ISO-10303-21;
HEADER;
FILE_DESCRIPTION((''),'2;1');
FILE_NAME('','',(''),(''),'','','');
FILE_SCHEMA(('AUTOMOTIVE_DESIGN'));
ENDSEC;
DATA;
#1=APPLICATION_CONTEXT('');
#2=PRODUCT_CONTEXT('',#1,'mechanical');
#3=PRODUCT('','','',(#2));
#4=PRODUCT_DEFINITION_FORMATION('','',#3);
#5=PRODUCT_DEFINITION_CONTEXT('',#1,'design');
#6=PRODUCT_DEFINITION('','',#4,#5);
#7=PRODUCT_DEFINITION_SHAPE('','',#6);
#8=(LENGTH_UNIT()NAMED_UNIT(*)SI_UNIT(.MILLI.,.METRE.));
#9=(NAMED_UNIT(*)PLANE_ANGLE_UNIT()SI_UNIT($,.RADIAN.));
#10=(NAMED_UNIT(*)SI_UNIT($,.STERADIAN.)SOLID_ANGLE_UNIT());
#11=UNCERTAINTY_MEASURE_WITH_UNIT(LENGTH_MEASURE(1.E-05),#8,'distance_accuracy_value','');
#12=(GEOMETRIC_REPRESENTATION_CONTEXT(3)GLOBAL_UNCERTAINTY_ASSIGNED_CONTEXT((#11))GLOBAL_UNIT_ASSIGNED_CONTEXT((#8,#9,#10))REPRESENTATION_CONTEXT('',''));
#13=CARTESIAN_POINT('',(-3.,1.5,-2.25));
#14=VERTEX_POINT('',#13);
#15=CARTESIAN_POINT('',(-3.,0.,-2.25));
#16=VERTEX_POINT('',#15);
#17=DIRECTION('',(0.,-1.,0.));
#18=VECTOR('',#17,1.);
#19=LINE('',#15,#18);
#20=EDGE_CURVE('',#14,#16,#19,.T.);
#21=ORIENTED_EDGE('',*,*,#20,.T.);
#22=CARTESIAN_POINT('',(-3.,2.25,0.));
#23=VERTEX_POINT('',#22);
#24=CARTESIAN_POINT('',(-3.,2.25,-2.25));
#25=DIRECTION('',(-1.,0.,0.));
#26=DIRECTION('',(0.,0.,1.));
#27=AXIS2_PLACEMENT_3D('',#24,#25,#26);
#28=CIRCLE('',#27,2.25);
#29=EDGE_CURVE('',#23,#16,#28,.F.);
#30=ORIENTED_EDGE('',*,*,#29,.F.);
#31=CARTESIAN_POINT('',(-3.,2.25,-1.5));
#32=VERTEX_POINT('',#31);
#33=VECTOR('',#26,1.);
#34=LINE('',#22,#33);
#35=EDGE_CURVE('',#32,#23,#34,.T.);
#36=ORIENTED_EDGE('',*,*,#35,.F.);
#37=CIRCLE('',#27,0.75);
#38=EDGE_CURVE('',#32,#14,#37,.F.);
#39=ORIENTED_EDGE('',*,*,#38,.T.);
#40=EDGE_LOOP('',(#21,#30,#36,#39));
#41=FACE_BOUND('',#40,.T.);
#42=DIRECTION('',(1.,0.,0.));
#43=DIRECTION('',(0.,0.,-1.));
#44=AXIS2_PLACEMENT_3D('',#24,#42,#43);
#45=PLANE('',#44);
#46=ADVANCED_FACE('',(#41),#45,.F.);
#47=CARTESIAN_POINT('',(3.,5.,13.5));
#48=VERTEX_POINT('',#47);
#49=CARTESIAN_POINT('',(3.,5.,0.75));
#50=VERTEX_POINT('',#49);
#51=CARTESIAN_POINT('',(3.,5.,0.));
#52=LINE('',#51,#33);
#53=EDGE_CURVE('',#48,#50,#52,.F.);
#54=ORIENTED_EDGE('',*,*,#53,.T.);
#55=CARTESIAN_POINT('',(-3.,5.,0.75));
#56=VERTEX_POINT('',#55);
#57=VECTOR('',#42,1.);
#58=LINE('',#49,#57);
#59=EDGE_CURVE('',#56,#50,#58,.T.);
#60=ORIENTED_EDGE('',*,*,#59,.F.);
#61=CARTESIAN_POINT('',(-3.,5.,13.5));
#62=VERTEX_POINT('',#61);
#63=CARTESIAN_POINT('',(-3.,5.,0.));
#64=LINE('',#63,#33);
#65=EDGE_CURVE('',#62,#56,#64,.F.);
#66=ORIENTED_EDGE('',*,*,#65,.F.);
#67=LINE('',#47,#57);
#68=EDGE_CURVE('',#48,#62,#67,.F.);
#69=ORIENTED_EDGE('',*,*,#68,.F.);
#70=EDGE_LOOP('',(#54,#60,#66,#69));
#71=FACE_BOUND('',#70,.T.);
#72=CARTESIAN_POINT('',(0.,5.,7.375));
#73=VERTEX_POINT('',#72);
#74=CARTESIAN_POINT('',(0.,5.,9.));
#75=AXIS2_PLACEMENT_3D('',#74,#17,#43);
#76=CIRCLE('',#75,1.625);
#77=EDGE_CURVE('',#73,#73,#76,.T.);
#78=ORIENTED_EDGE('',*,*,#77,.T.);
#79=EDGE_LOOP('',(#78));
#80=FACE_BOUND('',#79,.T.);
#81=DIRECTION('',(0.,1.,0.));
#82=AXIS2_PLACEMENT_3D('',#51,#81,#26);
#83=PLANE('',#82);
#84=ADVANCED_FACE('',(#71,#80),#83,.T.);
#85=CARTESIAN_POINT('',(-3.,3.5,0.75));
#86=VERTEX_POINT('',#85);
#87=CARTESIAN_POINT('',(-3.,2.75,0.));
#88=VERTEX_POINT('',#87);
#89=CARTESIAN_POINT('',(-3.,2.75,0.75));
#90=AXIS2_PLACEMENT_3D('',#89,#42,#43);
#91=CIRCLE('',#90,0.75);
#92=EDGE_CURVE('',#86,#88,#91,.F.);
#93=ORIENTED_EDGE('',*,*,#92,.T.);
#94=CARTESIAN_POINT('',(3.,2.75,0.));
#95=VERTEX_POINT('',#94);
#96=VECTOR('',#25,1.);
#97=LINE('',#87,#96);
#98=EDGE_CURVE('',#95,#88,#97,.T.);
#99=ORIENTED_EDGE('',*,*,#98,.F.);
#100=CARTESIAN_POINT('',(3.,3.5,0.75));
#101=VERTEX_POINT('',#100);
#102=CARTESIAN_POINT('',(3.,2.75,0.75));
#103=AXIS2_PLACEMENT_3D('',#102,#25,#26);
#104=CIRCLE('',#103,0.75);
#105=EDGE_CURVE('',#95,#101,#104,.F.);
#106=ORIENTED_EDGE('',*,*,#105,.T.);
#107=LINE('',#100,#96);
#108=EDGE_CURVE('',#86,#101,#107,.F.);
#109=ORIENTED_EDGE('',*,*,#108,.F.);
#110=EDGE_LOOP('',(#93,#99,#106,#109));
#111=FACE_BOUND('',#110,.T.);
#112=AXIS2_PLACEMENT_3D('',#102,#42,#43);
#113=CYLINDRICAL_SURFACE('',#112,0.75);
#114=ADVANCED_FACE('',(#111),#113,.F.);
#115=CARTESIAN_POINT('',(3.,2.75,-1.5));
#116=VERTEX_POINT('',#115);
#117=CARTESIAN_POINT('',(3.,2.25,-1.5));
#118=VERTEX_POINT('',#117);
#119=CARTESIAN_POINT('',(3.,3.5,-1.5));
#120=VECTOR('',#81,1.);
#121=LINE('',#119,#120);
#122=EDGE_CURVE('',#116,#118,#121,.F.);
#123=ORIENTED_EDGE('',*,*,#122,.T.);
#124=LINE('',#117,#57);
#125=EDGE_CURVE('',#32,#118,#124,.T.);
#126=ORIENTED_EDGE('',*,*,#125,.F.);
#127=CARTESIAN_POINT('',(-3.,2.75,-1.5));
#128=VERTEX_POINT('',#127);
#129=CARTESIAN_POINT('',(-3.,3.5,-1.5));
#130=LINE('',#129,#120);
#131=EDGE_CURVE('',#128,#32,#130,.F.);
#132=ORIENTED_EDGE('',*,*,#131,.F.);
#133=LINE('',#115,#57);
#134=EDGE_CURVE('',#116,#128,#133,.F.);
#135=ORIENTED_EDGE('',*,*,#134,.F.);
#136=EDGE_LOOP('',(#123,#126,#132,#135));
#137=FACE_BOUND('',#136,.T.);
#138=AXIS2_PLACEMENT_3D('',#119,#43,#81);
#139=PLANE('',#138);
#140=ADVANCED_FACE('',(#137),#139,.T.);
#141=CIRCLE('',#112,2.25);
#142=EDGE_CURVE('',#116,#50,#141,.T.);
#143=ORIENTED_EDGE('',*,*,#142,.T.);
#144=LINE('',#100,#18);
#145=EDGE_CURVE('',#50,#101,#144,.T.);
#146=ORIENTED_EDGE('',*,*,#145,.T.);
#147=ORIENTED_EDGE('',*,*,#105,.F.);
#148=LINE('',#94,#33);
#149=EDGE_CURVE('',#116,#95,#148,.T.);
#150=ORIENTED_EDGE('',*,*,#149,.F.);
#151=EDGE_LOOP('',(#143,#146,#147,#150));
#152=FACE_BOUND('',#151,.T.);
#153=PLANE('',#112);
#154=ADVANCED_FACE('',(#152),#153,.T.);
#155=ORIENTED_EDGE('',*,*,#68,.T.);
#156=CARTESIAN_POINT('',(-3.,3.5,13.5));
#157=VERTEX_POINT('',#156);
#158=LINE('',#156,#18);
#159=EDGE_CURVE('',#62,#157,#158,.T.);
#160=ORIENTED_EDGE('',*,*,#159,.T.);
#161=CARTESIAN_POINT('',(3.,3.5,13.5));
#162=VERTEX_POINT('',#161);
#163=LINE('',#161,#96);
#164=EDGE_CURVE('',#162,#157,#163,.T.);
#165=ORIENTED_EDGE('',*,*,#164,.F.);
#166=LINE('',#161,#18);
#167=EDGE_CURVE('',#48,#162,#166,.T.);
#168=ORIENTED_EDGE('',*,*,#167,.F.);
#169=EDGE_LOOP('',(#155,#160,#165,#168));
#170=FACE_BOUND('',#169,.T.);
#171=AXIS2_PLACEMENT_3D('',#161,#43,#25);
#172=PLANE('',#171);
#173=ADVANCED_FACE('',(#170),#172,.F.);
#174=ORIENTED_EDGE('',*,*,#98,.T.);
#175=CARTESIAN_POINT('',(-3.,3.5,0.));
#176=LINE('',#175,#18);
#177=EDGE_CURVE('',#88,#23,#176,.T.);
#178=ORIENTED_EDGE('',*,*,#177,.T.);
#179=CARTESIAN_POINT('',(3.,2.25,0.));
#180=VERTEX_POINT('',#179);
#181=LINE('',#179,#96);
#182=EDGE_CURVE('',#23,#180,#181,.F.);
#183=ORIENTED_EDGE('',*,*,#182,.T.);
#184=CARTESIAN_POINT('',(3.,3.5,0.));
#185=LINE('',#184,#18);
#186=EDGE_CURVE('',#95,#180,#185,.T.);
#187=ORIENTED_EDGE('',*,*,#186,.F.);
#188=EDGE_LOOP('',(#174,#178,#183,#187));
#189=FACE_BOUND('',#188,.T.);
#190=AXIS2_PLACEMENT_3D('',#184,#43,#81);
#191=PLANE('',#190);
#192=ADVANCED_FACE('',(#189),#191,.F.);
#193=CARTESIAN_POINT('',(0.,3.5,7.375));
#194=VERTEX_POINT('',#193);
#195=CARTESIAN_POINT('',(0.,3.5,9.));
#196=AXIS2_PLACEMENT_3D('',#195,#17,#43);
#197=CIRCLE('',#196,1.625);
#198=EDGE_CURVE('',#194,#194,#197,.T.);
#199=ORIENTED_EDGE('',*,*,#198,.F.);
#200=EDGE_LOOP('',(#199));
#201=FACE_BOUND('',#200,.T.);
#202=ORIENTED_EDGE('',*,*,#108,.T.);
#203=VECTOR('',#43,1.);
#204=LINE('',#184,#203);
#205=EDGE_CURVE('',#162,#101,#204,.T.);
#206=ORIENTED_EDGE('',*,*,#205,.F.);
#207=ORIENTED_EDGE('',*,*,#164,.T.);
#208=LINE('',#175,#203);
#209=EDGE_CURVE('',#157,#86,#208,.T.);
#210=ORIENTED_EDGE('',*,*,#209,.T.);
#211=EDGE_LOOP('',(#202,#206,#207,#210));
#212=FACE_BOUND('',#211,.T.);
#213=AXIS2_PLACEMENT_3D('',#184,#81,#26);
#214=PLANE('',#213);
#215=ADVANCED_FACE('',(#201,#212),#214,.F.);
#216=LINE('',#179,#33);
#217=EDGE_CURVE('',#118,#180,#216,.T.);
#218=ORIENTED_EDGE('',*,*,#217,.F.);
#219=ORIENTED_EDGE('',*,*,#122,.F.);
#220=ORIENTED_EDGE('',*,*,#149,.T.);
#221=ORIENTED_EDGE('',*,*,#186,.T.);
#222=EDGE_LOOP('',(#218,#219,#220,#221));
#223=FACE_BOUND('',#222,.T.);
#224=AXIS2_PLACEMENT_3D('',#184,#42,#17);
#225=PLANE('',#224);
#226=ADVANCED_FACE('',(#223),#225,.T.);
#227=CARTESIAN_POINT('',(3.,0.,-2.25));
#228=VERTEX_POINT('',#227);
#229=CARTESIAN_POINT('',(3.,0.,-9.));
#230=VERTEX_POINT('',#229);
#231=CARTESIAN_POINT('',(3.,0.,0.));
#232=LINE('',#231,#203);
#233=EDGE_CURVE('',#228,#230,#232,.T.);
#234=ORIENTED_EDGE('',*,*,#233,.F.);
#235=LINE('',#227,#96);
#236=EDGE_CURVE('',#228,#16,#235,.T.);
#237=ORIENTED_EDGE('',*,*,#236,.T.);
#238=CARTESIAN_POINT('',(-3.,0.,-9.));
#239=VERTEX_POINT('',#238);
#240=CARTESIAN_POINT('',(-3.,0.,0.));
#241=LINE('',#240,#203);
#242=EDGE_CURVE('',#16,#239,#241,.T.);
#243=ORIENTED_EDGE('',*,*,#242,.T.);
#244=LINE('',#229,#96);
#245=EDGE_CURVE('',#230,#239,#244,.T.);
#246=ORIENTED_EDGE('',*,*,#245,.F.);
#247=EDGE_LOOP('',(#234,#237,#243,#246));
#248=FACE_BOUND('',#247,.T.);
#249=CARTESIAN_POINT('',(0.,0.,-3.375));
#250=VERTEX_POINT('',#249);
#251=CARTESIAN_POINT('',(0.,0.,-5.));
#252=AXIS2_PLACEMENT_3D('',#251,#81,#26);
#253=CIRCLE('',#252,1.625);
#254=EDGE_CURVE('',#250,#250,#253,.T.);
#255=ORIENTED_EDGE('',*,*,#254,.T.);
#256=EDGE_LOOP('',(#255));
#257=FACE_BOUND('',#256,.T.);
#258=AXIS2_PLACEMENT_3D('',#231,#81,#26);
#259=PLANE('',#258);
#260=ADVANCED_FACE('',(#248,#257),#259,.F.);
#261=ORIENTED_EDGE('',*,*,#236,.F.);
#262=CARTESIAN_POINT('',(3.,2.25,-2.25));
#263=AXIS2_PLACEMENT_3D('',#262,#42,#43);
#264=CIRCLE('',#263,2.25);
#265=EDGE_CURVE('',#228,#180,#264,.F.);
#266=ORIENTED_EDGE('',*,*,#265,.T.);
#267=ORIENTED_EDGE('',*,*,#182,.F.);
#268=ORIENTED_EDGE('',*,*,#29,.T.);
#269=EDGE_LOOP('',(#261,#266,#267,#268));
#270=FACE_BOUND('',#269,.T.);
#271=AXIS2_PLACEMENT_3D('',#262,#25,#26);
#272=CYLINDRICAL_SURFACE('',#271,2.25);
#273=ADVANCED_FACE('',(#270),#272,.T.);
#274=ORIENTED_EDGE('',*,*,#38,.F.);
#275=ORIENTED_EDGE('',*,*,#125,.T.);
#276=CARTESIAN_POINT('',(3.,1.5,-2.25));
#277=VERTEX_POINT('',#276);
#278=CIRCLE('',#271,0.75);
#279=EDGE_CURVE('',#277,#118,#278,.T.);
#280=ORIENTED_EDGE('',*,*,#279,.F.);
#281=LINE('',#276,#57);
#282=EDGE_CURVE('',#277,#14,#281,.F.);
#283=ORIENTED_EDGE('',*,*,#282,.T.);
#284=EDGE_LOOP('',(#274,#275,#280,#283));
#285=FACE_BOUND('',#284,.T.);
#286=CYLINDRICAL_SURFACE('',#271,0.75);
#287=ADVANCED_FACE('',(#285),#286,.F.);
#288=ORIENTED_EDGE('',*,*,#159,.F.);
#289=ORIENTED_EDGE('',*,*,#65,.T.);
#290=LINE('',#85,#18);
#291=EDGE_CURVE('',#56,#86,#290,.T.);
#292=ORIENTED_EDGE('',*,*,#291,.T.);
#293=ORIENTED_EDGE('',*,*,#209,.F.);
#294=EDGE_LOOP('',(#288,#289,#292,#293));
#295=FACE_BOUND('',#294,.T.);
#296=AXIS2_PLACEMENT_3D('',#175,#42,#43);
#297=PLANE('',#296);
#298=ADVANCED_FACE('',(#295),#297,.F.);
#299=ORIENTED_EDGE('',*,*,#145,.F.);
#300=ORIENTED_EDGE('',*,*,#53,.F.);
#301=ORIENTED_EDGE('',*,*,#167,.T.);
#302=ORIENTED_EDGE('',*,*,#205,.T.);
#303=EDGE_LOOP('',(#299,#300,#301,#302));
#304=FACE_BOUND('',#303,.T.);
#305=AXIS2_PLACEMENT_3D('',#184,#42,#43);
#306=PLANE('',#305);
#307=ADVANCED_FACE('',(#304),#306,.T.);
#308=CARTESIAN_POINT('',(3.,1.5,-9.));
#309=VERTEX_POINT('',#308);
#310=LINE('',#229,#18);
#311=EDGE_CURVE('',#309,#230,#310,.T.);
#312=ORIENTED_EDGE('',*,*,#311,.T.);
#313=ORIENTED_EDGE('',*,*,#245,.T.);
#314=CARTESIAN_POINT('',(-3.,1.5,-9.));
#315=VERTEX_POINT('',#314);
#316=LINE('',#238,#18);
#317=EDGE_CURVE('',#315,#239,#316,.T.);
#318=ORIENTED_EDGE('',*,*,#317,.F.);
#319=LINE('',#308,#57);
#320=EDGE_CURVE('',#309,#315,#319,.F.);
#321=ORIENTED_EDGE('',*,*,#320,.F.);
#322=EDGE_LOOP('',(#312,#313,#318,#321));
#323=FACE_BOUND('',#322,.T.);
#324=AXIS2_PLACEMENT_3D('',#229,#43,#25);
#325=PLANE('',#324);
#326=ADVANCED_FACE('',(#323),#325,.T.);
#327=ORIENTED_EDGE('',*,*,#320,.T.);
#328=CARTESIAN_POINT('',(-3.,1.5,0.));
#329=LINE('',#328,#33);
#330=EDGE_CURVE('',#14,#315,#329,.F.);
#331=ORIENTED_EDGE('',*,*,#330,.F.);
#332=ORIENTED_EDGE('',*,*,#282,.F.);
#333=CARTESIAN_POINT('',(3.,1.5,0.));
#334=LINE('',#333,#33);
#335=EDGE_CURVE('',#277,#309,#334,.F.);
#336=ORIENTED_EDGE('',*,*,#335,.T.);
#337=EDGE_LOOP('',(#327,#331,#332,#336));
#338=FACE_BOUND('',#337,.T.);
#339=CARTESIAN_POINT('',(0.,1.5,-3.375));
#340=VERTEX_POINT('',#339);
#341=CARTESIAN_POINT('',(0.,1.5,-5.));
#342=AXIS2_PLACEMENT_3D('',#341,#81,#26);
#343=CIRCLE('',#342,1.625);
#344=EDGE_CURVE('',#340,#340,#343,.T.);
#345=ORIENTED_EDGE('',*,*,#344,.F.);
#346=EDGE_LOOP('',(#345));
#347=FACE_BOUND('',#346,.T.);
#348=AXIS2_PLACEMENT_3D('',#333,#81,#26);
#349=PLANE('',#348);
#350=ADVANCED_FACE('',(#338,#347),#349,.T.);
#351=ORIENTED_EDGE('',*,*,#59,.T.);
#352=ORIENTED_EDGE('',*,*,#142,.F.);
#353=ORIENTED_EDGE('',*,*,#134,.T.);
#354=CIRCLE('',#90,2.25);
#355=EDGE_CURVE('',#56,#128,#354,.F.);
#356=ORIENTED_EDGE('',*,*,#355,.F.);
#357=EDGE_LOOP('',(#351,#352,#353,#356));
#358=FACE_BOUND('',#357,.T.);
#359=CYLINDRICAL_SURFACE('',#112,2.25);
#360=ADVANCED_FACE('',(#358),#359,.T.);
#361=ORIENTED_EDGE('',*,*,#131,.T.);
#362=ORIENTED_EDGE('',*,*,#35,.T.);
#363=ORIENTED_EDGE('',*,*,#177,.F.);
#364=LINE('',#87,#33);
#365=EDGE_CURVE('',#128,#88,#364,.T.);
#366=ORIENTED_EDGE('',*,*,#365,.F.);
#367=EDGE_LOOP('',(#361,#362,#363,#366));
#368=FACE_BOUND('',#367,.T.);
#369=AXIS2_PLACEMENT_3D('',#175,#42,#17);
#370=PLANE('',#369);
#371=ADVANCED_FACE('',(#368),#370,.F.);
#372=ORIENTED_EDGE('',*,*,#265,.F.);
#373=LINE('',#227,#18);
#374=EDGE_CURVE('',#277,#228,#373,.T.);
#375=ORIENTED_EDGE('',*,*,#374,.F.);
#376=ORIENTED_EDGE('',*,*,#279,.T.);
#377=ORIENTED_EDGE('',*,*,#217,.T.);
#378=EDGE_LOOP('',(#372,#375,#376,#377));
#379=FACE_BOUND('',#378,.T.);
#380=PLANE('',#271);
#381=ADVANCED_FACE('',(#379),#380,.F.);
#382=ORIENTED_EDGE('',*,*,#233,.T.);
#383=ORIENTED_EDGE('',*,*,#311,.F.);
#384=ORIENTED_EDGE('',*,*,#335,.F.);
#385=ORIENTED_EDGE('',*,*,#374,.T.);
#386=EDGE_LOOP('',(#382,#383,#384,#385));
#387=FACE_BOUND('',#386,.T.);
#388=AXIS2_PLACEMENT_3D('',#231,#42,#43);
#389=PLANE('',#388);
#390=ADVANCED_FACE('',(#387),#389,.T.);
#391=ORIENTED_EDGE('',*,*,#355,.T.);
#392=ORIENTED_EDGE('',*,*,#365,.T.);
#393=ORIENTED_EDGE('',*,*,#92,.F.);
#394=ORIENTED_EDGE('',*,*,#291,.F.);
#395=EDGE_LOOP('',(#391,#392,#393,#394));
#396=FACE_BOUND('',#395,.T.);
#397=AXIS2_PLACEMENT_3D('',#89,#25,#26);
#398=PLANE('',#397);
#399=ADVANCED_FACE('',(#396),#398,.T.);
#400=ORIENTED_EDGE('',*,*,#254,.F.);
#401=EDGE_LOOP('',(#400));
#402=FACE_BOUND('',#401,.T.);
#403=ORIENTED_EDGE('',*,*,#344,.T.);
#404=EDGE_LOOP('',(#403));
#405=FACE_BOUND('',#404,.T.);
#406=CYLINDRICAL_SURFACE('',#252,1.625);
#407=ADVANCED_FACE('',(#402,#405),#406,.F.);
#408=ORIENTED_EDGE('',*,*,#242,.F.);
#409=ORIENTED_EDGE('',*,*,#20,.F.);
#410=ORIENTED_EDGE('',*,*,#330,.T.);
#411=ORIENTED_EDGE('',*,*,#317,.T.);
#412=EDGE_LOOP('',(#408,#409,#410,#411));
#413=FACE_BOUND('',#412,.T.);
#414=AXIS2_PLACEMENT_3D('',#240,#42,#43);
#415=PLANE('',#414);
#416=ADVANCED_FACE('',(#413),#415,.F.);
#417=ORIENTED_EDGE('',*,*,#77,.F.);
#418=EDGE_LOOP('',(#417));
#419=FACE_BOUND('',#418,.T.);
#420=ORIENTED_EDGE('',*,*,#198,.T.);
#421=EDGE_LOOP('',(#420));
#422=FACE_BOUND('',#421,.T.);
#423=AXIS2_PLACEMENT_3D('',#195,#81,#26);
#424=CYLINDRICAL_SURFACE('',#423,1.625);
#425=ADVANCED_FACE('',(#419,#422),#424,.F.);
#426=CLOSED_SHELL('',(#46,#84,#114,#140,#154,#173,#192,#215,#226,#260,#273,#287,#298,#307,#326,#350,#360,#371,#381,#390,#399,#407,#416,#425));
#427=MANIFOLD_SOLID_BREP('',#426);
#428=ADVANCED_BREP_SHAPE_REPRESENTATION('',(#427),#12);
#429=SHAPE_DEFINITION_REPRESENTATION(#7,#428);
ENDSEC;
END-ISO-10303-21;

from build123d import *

# Parameters (mm, degrees)
BOSS_EXTRUDE1_DEPTH    = 3
SKETCH2_R              = 1.625
CUT_EXTRUDE1_DEPTH     = 13.854960132
SKETCH3_R              = 1.625
CUT_EXTRUDE2_DEPTH     = 16.215124055
CONVERT_SOLID1_START   = -3
CONVERT_SOLID1_DEPTH   = 6
CONVERT_SOLID1_2_DEPTH = 6


# Read off the part's stored shape, not the designer's step: Convert-Solid1
with BuildPart() as part:
    # Sketch1 → Boss-Extrude1 (new, symmetric)
    with BuildSketch(Plane(origin=(0, 0, 0), x_dir=(0, 0, -1), z_dir=(1, 0, 0))):
        Polygon((0, 3.5), (0, 0), (9, 0), (9, 1.5), (1.5, 1.5), (1.5, 5), (-13.5, 5), (-13.5, 3.5), align=None)
    extrude(amount=BOSS_EXTRUDE1_DEPTH, both=True)

    # Sketch2 → Cut-Extrude1 (cut, through all)
    with BuildSketch(Plane(origin=(0, 1.5, 1.5), x_dir=(1, 0, 0), z_dir=(0, 1, 0))):
        with Locations(Location((0, 6.5, 0), (0, 0, 270))):
            Circle(SKETCH2_R)
    extrude(amount=-CUT_EXTRUDE1_DEPTH, mode=Mode.SUBTRACT)

    # Sketch3 → Cut-Extrude2 (cut, through all)
    with BuildSketch(Plane(origin=(0, 3.5, -1), x_dir=(1, 0, 0), z_dir=(0, -1, 0))):
        with Locations(Location((0, 10, 0), (0, 0, 270))):
            Circle(SKETCH3_R)
    extrude(amount=-CUT_EXTRUDE2_DEPTH, mode=Mode.SUBTRACT)

    # Convert-Solid1 outline → Convert-Solid1 (cut)
    with BuildSketch(Plane.YZ.offset(CONVERT_SOLID1_START)):
        with BuildLine():
            ThreePointArc((0, -2.25), (0.659009742, -0.659009742), (2.25, 0))
            Line((2.25, 0), (0, 0))
            Line((0, 0), (0, -2.25))
        make_face()
        with BuildLine():
            ThreePointArc((5, 0.75), (4.340990258, -0.840990258), (2.75, -1.5))
            Line((2.75, -1.5), (5, -1.5))
            Line((5, -1.5), (5, 0.75))
        make_face()
    extrude(amount=CONVERT_SOLID1_DEPTH, mode=Mode.SUBTRACT)

    # Convert-Solid1 2 outline → Convert-Solid1 2 (add)
    with BuildSketch(Plane.YZ.offset(CONVERT_SOLID1_START)):
        with BuildLine():
            ThreePointArc((3.5, 0.75), (3.280330086, 0.219669914), (2.75, 0))
            Line((2.75, 0), (3.5, 0))
            Line((3.5, 0), (3.5, 0.75))
        make_face()
        with BuildLine():
            ThreePointArc((1.5, -2.25), (1.719669914, -1.719669914), (2.25, -1.5))
            Line((2.25, -1.5), (1.5, -1.5))
            Line((1.5, -1.5), (1.5, -2.25))
        make_face()
    extrude(amount=CONVERT_SOLID1_2_DEPTH)


solid = part.part
